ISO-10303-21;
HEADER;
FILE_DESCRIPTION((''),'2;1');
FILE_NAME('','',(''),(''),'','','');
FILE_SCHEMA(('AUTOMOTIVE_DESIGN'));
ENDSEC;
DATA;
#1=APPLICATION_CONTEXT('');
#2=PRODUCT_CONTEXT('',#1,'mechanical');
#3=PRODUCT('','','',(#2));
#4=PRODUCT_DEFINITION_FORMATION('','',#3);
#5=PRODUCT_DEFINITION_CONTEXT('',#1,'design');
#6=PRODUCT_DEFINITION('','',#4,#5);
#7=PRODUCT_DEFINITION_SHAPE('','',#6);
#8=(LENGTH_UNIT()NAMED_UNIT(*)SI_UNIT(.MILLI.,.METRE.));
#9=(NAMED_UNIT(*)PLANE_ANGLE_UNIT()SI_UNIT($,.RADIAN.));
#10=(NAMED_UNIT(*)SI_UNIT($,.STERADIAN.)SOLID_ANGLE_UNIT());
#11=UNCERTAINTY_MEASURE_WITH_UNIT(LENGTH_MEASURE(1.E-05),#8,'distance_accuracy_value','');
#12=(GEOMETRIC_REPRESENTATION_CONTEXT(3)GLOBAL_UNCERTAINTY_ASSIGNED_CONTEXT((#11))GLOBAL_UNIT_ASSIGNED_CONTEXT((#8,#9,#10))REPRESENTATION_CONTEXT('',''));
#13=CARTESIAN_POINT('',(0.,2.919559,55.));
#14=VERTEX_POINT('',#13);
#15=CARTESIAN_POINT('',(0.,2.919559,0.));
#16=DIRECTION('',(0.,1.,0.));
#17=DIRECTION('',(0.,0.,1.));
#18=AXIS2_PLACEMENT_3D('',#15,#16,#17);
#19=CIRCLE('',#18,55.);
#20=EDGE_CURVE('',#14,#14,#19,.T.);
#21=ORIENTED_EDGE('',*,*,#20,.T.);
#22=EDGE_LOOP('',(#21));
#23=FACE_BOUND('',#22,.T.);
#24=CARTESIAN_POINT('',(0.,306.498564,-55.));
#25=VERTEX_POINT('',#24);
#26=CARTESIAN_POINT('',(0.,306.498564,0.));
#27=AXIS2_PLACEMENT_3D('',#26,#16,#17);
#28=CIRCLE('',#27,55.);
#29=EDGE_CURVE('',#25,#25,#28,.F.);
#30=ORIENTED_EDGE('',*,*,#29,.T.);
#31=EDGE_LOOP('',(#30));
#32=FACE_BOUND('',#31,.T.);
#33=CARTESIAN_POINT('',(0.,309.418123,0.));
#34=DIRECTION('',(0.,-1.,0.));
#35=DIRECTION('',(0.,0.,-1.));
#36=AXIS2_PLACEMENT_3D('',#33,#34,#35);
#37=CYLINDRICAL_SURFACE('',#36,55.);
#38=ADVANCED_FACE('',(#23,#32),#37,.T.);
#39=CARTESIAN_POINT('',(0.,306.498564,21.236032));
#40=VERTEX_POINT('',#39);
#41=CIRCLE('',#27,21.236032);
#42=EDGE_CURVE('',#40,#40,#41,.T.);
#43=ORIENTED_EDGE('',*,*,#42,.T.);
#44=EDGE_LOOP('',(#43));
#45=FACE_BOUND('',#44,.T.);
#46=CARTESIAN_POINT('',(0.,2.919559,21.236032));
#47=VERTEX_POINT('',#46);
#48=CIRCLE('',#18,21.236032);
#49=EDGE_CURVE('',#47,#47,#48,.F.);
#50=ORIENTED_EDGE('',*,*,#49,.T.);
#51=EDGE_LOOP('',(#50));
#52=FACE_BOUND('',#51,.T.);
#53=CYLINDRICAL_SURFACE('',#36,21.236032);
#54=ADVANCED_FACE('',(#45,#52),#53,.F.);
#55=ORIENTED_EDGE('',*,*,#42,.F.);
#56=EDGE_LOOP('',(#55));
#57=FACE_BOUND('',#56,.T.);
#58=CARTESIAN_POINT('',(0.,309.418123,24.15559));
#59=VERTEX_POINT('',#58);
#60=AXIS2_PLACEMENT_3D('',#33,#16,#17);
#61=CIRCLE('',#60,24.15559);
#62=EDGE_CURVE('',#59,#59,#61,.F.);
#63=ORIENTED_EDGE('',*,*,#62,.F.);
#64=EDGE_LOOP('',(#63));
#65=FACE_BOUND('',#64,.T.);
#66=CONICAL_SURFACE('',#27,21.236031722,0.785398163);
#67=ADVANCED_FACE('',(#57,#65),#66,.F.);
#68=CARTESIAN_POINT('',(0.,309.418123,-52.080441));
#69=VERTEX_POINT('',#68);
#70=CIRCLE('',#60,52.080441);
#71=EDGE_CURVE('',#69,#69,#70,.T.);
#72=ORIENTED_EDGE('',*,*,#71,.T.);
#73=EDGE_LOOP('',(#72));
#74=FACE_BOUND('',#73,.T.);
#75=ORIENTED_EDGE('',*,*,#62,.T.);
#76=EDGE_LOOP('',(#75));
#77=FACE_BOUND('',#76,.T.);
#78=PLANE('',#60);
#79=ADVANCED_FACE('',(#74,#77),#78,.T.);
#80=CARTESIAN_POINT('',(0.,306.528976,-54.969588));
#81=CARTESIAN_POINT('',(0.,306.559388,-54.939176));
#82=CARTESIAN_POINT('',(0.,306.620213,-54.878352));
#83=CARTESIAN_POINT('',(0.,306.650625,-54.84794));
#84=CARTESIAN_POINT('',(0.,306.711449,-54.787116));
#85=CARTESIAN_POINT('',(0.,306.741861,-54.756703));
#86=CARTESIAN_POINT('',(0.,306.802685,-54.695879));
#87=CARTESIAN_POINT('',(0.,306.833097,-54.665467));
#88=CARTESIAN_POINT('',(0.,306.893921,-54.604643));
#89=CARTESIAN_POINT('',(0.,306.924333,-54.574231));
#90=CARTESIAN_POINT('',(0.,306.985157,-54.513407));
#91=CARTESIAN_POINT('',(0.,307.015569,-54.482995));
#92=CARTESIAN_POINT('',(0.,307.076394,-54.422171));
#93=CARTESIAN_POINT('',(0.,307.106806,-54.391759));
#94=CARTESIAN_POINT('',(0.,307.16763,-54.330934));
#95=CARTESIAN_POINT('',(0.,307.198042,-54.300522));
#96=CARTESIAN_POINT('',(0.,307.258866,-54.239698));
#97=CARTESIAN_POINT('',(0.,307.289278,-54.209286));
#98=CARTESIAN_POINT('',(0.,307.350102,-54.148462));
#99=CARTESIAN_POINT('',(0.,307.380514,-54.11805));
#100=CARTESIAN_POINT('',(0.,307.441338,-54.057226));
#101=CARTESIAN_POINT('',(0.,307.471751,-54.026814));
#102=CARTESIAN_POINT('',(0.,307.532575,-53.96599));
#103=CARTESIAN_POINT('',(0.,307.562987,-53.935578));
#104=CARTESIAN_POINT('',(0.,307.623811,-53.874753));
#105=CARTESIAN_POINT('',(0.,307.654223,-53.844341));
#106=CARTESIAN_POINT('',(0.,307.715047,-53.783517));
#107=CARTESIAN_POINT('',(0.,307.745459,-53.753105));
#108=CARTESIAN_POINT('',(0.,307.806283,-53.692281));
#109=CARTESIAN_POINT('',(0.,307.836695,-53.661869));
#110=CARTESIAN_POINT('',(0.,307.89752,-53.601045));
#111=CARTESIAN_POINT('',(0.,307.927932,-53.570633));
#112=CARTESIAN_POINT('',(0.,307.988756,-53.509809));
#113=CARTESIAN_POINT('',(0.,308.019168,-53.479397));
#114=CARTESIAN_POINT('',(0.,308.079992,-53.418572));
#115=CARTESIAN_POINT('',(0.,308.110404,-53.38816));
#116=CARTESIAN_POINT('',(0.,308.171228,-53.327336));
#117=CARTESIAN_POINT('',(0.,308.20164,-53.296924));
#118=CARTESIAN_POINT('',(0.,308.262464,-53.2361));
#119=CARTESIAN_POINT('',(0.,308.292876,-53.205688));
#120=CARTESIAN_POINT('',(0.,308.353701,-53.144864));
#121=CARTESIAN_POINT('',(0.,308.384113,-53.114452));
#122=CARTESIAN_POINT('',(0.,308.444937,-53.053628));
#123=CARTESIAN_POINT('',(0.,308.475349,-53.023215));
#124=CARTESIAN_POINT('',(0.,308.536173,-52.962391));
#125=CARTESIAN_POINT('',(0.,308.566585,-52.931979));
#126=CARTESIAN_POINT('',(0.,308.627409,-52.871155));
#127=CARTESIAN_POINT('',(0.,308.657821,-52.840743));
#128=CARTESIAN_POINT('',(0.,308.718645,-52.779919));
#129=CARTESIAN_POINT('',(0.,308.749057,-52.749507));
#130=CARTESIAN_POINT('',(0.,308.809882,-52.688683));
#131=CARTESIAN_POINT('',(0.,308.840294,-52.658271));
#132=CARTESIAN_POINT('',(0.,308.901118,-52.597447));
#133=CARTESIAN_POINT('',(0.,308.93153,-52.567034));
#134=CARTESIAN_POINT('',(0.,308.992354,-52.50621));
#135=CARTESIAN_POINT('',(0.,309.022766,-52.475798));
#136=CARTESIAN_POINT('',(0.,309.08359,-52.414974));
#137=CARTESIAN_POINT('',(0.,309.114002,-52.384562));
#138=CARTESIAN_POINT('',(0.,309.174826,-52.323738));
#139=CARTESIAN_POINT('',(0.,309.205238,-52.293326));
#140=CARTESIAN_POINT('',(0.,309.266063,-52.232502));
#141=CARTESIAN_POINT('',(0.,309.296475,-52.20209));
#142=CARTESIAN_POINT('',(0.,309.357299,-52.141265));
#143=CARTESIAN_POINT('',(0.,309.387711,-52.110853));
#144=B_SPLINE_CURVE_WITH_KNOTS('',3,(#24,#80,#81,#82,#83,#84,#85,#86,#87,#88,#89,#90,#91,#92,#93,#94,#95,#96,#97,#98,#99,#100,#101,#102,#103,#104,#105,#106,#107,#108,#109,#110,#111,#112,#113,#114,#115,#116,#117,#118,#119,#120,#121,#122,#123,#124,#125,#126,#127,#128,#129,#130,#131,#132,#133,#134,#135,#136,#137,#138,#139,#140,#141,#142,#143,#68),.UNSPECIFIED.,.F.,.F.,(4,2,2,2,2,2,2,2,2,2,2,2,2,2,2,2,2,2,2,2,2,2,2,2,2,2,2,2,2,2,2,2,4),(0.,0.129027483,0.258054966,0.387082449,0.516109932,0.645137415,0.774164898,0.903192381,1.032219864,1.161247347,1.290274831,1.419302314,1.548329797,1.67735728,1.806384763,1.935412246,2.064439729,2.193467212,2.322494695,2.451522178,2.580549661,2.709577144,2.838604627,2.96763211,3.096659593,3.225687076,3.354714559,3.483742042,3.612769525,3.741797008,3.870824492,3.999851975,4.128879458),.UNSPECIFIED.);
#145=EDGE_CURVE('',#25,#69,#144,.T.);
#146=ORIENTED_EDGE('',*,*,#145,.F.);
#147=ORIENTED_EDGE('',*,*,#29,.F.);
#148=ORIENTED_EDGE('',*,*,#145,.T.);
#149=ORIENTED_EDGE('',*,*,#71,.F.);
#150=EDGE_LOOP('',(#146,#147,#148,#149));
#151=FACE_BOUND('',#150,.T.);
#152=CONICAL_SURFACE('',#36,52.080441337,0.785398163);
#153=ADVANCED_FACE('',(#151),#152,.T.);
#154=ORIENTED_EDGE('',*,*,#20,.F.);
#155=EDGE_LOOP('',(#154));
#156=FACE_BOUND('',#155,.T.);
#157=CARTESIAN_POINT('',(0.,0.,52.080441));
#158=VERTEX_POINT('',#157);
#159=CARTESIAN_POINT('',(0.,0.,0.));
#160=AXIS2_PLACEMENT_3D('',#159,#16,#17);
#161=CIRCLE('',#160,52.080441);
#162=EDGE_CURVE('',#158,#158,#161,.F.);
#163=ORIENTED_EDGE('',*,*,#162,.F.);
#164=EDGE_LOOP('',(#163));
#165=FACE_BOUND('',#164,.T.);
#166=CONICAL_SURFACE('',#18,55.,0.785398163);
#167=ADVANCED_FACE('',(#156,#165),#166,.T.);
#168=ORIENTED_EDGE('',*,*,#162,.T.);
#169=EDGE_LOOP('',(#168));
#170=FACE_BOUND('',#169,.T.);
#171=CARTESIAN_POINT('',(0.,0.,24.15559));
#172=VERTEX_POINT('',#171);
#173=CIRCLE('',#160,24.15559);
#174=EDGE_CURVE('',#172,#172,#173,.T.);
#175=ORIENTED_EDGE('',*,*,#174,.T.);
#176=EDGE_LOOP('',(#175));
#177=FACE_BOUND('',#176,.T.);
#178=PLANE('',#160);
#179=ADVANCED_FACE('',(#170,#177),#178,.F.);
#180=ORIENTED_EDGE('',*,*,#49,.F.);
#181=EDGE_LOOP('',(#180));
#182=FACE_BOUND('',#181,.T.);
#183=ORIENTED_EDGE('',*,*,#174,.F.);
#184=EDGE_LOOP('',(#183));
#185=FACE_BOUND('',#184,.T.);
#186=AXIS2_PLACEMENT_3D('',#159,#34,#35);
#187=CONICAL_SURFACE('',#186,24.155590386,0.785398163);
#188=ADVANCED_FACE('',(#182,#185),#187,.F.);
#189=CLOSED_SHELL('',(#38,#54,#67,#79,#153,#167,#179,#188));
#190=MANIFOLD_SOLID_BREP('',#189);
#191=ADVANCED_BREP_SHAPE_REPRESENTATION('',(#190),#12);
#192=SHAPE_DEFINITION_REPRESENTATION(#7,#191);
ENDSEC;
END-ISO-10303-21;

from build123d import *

# Parameters (mm, degrees)
SKETCH1_R           = 55
BOSS_EXTRUDE1_DEPTH = 309.418122975
SKETCH2_R           = 21.236031722
CUT_EXTRUDE1_DEPTH  = 320.044784984
CHAMFER1_SIZE       = 2.919558663


with BuildPart() as part:
    # Sketch1 → Boss-Extrude1 (new body)
    with BuildSketch(Plane(origin=(0, 0, 0), x_dir=(1, 0, 0), z_dir=(0, 1, 0))):
        Circle(SKETCH1_R)
    extrude(amount=BOSS_EXTRUDE1_DEPTH)

    # Sketch2 → Cut-Extrude1 (cut, through all)
    with BuildSketch(Plane(origin=(0, 0, 0), x_dir=(1, 0, 0), z_dir=(0, 1, 0))):
        Circle(SKETCH2_R)
    extrude(amount=CUT_EXTRUDE1_DEPTH, mode=Mode.SUBTRACT)

    # Chamfer1
    chamfer1_edges = [part.edges().sort_by_distance(p)[0] for p in [
        (-21.236031722, 309.418122975, 0),
        (-21.236031722, 0, 0),
        (-55, 0, 0),
        (-55, 309.418122975, 0),
    ]]
    chamfer(chamfer1_edges, length=CHAMFER1_SIZE)


solid = part.part
